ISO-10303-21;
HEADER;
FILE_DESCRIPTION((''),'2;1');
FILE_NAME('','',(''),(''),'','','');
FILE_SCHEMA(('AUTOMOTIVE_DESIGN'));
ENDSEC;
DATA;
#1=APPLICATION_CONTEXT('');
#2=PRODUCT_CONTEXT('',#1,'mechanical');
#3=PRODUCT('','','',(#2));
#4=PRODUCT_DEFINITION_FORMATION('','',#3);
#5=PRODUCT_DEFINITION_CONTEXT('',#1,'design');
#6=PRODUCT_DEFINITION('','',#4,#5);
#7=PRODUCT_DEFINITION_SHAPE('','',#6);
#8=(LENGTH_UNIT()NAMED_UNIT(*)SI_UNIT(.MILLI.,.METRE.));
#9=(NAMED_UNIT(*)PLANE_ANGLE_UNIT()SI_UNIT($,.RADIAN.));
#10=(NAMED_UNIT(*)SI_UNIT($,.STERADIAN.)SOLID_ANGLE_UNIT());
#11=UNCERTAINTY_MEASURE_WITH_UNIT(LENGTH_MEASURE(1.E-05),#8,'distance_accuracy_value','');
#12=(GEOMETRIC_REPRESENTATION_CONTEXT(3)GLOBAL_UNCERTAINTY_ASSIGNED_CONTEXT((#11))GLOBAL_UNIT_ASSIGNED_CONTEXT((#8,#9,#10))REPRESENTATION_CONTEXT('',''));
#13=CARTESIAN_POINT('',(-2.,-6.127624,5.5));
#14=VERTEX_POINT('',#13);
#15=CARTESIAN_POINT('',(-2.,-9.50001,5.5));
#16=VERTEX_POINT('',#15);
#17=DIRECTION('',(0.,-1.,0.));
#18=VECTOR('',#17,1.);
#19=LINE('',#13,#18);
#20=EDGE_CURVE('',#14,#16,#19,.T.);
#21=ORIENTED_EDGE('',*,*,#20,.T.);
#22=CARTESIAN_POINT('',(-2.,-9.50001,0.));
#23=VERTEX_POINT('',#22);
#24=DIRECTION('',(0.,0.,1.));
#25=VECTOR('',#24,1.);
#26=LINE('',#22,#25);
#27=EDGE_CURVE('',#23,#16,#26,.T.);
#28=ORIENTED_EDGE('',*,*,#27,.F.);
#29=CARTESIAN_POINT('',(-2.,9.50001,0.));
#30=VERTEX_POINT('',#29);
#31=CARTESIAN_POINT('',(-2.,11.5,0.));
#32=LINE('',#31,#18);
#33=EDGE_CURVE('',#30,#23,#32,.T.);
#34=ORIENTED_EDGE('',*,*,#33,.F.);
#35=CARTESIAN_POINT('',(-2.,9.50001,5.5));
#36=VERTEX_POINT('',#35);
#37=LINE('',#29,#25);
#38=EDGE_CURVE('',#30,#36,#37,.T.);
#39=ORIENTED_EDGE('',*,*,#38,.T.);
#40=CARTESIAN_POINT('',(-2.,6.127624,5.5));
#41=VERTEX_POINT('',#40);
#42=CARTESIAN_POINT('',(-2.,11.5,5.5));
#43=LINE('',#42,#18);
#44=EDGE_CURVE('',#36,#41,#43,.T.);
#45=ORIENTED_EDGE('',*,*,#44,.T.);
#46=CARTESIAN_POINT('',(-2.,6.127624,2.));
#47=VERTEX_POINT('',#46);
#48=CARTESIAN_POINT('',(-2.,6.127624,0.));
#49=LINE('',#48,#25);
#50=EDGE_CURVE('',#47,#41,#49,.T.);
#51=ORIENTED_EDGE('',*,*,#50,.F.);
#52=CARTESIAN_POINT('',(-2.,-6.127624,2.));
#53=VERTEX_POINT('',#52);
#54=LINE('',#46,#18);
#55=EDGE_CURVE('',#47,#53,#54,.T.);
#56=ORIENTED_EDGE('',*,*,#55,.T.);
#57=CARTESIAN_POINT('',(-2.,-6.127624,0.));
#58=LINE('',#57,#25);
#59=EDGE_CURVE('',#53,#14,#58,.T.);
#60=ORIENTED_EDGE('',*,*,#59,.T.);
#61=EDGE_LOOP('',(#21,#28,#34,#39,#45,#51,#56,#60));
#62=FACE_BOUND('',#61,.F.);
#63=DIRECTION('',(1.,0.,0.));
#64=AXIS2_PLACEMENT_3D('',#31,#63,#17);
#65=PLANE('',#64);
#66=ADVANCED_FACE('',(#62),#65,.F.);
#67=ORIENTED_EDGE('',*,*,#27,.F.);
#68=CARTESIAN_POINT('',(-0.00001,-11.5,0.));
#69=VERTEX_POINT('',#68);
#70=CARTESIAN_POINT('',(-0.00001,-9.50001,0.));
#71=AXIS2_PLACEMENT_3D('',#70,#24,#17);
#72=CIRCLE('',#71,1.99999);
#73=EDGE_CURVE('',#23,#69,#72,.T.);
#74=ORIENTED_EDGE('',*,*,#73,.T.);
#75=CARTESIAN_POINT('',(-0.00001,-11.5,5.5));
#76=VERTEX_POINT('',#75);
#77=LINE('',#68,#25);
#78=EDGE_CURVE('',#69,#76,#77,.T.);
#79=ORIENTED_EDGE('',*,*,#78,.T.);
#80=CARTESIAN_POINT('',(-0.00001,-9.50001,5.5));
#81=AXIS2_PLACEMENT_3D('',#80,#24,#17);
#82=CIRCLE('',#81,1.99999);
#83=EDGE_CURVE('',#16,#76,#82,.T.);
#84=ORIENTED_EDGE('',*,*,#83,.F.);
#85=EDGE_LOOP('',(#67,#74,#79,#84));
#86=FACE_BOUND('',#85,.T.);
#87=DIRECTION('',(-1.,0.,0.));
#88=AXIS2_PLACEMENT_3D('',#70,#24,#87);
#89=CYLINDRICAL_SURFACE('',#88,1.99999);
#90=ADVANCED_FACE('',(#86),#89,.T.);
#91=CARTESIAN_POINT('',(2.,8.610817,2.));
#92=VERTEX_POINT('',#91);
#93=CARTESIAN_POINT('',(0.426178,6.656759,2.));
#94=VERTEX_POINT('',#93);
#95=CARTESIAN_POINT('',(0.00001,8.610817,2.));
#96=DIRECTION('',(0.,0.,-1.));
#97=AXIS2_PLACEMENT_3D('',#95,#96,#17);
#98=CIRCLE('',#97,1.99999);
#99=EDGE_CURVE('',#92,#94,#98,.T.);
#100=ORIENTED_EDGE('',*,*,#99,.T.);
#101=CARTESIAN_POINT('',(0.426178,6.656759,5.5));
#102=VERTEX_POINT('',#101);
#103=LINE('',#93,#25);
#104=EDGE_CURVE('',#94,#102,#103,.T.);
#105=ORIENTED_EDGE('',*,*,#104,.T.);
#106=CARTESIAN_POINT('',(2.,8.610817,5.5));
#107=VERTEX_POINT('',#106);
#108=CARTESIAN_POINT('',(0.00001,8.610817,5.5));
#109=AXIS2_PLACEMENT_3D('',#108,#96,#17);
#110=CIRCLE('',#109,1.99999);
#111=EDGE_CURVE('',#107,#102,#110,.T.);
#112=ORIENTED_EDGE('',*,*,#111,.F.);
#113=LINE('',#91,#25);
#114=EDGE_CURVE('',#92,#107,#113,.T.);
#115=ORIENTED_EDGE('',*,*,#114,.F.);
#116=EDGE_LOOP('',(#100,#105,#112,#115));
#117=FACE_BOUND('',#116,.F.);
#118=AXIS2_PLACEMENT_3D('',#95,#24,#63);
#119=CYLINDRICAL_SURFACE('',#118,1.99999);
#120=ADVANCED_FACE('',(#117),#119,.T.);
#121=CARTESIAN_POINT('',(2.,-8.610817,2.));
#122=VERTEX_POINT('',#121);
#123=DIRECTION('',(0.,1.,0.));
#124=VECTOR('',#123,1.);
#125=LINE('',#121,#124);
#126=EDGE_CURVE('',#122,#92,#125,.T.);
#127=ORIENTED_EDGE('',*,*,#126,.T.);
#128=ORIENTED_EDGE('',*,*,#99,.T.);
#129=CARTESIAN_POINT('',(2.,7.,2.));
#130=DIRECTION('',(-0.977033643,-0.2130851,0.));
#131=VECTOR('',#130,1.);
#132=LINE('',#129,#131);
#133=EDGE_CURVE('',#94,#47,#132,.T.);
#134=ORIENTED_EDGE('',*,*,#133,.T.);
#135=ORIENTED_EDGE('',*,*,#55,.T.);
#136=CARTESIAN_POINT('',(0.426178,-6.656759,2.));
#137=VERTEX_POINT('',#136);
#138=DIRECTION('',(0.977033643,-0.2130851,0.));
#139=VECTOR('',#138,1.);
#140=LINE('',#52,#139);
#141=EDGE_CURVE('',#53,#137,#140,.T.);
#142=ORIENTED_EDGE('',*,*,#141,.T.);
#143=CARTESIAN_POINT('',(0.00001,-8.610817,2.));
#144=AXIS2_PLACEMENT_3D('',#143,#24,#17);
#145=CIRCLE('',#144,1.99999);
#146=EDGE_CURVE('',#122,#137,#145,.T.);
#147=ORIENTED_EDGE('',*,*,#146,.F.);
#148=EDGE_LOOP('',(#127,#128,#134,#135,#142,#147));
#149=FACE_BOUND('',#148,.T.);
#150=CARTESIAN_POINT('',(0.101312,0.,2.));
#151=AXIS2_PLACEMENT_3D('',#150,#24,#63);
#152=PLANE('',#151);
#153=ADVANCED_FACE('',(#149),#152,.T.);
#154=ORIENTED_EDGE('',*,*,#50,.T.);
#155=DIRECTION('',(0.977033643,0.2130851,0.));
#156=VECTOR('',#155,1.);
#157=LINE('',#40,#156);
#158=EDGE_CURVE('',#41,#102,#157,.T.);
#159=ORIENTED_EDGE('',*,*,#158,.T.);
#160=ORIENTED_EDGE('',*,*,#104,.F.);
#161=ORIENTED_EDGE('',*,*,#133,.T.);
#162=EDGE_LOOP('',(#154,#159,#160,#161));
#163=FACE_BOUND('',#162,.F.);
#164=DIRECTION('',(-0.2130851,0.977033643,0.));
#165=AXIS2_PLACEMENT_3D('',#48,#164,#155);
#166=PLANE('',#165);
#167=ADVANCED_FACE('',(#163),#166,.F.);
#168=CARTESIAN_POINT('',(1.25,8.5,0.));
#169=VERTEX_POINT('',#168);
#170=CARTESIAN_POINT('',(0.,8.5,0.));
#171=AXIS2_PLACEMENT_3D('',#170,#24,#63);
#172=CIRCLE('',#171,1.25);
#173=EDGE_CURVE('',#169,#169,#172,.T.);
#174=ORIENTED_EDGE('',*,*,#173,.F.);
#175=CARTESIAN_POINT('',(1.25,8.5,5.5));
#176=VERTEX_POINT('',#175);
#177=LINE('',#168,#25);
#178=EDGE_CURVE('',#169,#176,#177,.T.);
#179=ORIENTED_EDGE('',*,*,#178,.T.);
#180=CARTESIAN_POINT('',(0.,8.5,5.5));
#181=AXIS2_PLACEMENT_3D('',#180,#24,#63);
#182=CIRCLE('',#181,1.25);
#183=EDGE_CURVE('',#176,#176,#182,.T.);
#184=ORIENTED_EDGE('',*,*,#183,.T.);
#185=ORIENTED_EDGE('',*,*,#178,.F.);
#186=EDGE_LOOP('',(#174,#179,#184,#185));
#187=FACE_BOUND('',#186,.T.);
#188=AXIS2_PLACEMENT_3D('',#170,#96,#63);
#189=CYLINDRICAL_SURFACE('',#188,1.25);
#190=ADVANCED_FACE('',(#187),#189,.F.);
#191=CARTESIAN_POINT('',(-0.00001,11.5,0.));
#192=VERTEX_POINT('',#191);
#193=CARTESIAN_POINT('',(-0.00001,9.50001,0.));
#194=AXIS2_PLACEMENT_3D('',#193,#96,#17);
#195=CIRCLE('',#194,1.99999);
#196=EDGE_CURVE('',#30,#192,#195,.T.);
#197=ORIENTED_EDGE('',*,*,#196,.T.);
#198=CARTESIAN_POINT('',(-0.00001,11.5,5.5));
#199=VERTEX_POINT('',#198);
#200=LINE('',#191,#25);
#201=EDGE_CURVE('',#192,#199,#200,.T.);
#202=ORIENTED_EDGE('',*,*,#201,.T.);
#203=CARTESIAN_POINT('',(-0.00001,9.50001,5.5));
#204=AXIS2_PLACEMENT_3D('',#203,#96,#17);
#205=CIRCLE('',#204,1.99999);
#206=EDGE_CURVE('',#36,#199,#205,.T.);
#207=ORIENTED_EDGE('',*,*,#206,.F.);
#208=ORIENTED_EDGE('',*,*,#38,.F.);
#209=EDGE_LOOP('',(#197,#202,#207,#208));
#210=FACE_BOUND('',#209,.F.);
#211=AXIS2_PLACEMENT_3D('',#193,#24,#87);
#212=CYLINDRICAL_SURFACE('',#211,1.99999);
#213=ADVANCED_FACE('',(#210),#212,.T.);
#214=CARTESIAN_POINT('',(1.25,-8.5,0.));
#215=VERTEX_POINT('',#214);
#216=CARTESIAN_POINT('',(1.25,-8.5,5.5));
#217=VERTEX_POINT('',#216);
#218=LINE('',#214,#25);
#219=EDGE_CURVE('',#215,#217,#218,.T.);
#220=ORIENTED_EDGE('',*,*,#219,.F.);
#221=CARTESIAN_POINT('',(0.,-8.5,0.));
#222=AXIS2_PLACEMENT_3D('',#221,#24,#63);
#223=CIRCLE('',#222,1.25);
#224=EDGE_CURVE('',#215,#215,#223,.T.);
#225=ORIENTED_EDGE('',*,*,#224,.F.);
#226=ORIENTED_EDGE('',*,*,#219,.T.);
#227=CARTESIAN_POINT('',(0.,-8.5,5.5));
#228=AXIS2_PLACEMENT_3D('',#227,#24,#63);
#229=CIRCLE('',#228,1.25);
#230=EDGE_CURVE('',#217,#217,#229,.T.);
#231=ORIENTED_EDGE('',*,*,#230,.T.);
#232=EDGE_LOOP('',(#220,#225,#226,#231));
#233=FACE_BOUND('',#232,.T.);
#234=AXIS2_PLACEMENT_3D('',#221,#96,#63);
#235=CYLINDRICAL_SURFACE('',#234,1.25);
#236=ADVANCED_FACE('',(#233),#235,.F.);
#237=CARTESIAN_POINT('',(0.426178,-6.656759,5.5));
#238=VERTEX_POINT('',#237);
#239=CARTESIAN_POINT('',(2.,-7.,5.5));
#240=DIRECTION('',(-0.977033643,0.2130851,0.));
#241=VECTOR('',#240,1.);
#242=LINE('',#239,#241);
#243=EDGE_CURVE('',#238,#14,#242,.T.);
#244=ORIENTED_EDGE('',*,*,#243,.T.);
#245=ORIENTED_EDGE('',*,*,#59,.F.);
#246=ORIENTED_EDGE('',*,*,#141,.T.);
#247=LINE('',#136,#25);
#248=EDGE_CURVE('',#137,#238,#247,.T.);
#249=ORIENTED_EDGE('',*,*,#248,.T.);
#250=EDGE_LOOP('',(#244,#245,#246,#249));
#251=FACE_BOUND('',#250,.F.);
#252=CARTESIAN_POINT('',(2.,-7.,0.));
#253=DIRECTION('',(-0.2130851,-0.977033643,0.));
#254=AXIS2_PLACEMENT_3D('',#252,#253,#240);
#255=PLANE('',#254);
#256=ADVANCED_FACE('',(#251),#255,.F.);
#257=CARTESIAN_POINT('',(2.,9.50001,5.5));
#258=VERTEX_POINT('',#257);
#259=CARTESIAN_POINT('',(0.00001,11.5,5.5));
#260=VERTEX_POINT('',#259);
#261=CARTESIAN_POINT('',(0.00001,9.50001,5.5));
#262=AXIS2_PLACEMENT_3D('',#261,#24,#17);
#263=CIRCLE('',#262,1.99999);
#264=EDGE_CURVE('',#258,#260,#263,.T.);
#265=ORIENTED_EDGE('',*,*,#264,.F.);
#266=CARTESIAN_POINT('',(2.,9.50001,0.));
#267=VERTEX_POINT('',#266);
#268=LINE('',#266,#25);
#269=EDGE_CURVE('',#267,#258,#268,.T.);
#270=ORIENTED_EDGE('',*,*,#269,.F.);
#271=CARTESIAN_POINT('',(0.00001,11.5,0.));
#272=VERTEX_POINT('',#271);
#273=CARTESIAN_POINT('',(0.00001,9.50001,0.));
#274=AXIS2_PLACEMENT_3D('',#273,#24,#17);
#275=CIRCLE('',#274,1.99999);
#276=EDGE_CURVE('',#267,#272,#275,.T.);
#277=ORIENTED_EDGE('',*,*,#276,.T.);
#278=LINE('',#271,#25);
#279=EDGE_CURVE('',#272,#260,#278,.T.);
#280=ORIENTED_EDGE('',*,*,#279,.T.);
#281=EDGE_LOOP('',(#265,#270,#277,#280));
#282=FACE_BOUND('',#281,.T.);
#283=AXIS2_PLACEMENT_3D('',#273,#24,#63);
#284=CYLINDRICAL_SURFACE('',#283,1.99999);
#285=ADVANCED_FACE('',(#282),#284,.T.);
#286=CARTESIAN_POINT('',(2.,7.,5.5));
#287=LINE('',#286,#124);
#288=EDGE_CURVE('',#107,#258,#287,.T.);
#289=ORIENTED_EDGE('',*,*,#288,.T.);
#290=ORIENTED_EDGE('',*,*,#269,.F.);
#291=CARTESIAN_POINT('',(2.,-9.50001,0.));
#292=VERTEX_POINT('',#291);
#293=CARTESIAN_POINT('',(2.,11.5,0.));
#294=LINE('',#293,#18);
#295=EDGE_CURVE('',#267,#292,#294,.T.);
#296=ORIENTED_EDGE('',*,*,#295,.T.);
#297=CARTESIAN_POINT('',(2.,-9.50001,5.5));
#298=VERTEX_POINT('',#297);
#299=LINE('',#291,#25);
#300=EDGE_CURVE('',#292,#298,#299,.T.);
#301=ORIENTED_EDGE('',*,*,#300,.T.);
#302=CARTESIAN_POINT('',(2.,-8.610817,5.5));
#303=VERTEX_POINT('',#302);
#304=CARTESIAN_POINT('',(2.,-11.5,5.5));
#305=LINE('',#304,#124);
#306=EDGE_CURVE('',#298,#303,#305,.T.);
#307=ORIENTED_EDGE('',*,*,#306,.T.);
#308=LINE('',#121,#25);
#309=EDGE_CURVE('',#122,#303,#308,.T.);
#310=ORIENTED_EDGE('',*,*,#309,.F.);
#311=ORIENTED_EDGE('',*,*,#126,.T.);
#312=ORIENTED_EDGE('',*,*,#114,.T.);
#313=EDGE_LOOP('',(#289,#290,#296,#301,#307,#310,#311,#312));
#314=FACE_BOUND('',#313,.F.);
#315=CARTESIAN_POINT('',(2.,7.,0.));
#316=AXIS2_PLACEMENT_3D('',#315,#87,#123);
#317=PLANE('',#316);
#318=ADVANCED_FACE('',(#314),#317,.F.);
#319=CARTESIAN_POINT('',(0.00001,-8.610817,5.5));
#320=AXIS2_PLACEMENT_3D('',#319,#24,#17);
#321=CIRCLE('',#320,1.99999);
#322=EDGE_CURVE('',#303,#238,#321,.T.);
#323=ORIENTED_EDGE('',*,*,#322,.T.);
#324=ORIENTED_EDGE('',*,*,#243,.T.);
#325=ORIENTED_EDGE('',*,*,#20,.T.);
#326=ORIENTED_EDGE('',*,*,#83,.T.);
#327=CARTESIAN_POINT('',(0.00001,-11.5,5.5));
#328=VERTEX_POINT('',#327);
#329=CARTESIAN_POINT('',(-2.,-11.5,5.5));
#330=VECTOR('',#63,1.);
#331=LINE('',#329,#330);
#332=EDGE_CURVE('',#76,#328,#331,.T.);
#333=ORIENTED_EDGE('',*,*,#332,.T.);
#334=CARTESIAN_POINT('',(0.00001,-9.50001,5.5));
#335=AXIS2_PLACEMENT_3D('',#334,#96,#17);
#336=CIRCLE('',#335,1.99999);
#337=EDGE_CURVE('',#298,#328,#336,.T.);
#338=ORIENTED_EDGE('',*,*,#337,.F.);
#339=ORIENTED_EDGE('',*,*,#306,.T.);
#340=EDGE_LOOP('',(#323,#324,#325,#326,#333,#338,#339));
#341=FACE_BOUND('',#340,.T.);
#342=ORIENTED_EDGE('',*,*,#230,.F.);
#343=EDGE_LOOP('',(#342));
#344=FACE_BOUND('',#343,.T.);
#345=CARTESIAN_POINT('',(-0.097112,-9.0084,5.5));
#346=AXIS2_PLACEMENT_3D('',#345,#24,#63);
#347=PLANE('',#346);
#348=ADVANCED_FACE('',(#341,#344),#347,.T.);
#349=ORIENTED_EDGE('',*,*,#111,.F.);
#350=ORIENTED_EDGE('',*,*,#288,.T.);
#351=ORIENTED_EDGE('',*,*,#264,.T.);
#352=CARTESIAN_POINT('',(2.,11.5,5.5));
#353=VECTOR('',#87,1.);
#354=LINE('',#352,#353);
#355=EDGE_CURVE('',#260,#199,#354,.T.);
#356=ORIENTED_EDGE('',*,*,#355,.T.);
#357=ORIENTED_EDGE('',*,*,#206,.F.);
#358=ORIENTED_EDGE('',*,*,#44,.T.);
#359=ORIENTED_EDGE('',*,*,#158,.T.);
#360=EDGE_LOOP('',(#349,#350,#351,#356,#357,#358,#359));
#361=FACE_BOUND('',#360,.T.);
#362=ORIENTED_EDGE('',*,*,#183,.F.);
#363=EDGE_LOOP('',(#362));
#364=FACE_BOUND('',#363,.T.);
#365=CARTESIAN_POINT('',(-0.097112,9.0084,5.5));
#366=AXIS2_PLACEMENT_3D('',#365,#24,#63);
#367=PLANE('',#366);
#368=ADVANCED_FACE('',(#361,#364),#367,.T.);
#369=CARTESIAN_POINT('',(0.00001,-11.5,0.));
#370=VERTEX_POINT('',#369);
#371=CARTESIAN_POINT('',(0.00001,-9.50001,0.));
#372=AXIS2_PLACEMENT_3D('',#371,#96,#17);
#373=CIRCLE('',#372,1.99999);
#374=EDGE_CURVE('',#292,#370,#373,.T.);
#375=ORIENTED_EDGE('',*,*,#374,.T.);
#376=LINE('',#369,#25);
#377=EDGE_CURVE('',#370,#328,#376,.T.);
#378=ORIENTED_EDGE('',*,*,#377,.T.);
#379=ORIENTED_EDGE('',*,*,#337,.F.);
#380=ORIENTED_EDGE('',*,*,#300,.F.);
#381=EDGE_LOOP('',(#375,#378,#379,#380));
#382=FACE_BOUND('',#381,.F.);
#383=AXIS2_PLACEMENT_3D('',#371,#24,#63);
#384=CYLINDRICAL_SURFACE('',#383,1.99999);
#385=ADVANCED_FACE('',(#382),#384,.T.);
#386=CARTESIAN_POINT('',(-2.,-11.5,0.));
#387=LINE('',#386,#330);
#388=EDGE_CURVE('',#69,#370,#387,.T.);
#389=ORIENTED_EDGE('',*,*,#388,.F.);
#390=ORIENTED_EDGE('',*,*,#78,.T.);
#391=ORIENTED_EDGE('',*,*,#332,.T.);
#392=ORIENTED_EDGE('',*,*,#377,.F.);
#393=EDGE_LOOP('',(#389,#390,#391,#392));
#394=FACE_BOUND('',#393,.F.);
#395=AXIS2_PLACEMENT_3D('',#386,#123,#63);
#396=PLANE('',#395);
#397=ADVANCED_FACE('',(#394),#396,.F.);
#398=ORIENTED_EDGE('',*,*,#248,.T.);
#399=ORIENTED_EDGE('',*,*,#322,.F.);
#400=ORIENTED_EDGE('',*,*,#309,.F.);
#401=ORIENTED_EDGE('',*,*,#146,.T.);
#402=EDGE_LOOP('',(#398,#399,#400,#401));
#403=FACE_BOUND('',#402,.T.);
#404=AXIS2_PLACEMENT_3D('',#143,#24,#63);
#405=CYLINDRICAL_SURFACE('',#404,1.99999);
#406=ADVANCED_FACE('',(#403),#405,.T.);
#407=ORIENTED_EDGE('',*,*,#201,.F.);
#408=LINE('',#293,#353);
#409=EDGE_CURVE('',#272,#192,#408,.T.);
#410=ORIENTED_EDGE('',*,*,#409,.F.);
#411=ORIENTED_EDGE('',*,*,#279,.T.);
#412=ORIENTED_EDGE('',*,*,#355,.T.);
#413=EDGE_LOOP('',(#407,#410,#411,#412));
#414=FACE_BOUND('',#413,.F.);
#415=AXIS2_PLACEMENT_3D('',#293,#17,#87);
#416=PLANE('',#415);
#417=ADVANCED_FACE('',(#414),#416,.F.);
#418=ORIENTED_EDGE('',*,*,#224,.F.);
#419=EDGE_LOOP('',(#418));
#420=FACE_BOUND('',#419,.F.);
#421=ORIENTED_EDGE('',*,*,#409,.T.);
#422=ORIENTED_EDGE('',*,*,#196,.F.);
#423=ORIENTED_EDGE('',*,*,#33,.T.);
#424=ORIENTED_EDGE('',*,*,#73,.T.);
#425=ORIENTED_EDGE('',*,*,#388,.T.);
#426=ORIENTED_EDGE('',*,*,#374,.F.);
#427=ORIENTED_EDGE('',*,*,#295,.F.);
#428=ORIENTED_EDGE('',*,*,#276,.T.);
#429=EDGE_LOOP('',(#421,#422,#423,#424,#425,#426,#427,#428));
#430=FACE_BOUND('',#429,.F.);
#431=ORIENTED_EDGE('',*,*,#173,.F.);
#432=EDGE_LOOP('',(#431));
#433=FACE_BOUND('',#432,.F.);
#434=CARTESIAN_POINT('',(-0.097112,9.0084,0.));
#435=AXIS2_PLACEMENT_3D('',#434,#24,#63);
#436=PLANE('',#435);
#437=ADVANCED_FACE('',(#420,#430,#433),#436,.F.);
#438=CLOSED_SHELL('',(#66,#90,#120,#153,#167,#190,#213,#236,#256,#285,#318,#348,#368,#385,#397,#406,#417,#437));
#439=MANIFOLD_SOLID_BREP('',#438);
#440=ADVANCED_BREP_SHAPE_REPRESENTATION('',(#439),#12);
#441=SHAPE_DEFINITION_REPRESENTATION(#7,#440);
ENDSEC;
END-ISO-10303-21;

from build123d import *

# Parameters (mm, degrees)
F1_DEPTH = 2
F0_R     = 1.25
F2_DEPTH = 5.5
F3_R     = 1.99999


# Not quite as in the source:
# - a fillet or chamfer is up to 0.001 mm smaller than in the source, because OpenCascade refuses the exact size
# - a feature names something its author has since deleted; it is built from what else it names


with BuildPart() as f1:
    # F0 (on Top) → F1 (new body)
    with BuildSketch(Plane.XY):
        Polygon((-2, 6.1276243068), (-2, -6.1276243068), (2, -7), (2, 7), align=None)
    extrude(amount=F1_DEPTH)

    # F0 (on Top) → F2 (join)
    with BuildSketch(Plane.XY):
        Polygon((-2, 11.5), (-2, 6.1276243068), (2, 7), (2, 11.5), align=None)
        with Locations((0, 8.5)):
            Circle(F0_R, mode=Mode.SUBTRACT)
        Polygon((-2, -11.5), (2, -11.5), (2, -8.2029914483), (2, -7), (-2, -6.1276243068), align=None)
        with Locations((0, -8.5)):
            Circle(F0_R, mode=Mode.SUBTRACT)
    extrude(amount=F2_DEPTH)

    # F3 (radius 2 in the source; OpenCascade refuses exactly that, so slightly less here)
    f3_edges = [f1.edges().sort_by_distance(p)[0] for p in [
        (2, 11.5, 2.75),
        (-2, 11.5, 2.75),
        (2, -11.5, 2.75),
        (-2, -11.5, 2.75),
        (2, -7, 3.75),
        (2, 7, 3.75),
    ]]
    fillet(f3_edges, radius=F3_R)


solid = f1.part
